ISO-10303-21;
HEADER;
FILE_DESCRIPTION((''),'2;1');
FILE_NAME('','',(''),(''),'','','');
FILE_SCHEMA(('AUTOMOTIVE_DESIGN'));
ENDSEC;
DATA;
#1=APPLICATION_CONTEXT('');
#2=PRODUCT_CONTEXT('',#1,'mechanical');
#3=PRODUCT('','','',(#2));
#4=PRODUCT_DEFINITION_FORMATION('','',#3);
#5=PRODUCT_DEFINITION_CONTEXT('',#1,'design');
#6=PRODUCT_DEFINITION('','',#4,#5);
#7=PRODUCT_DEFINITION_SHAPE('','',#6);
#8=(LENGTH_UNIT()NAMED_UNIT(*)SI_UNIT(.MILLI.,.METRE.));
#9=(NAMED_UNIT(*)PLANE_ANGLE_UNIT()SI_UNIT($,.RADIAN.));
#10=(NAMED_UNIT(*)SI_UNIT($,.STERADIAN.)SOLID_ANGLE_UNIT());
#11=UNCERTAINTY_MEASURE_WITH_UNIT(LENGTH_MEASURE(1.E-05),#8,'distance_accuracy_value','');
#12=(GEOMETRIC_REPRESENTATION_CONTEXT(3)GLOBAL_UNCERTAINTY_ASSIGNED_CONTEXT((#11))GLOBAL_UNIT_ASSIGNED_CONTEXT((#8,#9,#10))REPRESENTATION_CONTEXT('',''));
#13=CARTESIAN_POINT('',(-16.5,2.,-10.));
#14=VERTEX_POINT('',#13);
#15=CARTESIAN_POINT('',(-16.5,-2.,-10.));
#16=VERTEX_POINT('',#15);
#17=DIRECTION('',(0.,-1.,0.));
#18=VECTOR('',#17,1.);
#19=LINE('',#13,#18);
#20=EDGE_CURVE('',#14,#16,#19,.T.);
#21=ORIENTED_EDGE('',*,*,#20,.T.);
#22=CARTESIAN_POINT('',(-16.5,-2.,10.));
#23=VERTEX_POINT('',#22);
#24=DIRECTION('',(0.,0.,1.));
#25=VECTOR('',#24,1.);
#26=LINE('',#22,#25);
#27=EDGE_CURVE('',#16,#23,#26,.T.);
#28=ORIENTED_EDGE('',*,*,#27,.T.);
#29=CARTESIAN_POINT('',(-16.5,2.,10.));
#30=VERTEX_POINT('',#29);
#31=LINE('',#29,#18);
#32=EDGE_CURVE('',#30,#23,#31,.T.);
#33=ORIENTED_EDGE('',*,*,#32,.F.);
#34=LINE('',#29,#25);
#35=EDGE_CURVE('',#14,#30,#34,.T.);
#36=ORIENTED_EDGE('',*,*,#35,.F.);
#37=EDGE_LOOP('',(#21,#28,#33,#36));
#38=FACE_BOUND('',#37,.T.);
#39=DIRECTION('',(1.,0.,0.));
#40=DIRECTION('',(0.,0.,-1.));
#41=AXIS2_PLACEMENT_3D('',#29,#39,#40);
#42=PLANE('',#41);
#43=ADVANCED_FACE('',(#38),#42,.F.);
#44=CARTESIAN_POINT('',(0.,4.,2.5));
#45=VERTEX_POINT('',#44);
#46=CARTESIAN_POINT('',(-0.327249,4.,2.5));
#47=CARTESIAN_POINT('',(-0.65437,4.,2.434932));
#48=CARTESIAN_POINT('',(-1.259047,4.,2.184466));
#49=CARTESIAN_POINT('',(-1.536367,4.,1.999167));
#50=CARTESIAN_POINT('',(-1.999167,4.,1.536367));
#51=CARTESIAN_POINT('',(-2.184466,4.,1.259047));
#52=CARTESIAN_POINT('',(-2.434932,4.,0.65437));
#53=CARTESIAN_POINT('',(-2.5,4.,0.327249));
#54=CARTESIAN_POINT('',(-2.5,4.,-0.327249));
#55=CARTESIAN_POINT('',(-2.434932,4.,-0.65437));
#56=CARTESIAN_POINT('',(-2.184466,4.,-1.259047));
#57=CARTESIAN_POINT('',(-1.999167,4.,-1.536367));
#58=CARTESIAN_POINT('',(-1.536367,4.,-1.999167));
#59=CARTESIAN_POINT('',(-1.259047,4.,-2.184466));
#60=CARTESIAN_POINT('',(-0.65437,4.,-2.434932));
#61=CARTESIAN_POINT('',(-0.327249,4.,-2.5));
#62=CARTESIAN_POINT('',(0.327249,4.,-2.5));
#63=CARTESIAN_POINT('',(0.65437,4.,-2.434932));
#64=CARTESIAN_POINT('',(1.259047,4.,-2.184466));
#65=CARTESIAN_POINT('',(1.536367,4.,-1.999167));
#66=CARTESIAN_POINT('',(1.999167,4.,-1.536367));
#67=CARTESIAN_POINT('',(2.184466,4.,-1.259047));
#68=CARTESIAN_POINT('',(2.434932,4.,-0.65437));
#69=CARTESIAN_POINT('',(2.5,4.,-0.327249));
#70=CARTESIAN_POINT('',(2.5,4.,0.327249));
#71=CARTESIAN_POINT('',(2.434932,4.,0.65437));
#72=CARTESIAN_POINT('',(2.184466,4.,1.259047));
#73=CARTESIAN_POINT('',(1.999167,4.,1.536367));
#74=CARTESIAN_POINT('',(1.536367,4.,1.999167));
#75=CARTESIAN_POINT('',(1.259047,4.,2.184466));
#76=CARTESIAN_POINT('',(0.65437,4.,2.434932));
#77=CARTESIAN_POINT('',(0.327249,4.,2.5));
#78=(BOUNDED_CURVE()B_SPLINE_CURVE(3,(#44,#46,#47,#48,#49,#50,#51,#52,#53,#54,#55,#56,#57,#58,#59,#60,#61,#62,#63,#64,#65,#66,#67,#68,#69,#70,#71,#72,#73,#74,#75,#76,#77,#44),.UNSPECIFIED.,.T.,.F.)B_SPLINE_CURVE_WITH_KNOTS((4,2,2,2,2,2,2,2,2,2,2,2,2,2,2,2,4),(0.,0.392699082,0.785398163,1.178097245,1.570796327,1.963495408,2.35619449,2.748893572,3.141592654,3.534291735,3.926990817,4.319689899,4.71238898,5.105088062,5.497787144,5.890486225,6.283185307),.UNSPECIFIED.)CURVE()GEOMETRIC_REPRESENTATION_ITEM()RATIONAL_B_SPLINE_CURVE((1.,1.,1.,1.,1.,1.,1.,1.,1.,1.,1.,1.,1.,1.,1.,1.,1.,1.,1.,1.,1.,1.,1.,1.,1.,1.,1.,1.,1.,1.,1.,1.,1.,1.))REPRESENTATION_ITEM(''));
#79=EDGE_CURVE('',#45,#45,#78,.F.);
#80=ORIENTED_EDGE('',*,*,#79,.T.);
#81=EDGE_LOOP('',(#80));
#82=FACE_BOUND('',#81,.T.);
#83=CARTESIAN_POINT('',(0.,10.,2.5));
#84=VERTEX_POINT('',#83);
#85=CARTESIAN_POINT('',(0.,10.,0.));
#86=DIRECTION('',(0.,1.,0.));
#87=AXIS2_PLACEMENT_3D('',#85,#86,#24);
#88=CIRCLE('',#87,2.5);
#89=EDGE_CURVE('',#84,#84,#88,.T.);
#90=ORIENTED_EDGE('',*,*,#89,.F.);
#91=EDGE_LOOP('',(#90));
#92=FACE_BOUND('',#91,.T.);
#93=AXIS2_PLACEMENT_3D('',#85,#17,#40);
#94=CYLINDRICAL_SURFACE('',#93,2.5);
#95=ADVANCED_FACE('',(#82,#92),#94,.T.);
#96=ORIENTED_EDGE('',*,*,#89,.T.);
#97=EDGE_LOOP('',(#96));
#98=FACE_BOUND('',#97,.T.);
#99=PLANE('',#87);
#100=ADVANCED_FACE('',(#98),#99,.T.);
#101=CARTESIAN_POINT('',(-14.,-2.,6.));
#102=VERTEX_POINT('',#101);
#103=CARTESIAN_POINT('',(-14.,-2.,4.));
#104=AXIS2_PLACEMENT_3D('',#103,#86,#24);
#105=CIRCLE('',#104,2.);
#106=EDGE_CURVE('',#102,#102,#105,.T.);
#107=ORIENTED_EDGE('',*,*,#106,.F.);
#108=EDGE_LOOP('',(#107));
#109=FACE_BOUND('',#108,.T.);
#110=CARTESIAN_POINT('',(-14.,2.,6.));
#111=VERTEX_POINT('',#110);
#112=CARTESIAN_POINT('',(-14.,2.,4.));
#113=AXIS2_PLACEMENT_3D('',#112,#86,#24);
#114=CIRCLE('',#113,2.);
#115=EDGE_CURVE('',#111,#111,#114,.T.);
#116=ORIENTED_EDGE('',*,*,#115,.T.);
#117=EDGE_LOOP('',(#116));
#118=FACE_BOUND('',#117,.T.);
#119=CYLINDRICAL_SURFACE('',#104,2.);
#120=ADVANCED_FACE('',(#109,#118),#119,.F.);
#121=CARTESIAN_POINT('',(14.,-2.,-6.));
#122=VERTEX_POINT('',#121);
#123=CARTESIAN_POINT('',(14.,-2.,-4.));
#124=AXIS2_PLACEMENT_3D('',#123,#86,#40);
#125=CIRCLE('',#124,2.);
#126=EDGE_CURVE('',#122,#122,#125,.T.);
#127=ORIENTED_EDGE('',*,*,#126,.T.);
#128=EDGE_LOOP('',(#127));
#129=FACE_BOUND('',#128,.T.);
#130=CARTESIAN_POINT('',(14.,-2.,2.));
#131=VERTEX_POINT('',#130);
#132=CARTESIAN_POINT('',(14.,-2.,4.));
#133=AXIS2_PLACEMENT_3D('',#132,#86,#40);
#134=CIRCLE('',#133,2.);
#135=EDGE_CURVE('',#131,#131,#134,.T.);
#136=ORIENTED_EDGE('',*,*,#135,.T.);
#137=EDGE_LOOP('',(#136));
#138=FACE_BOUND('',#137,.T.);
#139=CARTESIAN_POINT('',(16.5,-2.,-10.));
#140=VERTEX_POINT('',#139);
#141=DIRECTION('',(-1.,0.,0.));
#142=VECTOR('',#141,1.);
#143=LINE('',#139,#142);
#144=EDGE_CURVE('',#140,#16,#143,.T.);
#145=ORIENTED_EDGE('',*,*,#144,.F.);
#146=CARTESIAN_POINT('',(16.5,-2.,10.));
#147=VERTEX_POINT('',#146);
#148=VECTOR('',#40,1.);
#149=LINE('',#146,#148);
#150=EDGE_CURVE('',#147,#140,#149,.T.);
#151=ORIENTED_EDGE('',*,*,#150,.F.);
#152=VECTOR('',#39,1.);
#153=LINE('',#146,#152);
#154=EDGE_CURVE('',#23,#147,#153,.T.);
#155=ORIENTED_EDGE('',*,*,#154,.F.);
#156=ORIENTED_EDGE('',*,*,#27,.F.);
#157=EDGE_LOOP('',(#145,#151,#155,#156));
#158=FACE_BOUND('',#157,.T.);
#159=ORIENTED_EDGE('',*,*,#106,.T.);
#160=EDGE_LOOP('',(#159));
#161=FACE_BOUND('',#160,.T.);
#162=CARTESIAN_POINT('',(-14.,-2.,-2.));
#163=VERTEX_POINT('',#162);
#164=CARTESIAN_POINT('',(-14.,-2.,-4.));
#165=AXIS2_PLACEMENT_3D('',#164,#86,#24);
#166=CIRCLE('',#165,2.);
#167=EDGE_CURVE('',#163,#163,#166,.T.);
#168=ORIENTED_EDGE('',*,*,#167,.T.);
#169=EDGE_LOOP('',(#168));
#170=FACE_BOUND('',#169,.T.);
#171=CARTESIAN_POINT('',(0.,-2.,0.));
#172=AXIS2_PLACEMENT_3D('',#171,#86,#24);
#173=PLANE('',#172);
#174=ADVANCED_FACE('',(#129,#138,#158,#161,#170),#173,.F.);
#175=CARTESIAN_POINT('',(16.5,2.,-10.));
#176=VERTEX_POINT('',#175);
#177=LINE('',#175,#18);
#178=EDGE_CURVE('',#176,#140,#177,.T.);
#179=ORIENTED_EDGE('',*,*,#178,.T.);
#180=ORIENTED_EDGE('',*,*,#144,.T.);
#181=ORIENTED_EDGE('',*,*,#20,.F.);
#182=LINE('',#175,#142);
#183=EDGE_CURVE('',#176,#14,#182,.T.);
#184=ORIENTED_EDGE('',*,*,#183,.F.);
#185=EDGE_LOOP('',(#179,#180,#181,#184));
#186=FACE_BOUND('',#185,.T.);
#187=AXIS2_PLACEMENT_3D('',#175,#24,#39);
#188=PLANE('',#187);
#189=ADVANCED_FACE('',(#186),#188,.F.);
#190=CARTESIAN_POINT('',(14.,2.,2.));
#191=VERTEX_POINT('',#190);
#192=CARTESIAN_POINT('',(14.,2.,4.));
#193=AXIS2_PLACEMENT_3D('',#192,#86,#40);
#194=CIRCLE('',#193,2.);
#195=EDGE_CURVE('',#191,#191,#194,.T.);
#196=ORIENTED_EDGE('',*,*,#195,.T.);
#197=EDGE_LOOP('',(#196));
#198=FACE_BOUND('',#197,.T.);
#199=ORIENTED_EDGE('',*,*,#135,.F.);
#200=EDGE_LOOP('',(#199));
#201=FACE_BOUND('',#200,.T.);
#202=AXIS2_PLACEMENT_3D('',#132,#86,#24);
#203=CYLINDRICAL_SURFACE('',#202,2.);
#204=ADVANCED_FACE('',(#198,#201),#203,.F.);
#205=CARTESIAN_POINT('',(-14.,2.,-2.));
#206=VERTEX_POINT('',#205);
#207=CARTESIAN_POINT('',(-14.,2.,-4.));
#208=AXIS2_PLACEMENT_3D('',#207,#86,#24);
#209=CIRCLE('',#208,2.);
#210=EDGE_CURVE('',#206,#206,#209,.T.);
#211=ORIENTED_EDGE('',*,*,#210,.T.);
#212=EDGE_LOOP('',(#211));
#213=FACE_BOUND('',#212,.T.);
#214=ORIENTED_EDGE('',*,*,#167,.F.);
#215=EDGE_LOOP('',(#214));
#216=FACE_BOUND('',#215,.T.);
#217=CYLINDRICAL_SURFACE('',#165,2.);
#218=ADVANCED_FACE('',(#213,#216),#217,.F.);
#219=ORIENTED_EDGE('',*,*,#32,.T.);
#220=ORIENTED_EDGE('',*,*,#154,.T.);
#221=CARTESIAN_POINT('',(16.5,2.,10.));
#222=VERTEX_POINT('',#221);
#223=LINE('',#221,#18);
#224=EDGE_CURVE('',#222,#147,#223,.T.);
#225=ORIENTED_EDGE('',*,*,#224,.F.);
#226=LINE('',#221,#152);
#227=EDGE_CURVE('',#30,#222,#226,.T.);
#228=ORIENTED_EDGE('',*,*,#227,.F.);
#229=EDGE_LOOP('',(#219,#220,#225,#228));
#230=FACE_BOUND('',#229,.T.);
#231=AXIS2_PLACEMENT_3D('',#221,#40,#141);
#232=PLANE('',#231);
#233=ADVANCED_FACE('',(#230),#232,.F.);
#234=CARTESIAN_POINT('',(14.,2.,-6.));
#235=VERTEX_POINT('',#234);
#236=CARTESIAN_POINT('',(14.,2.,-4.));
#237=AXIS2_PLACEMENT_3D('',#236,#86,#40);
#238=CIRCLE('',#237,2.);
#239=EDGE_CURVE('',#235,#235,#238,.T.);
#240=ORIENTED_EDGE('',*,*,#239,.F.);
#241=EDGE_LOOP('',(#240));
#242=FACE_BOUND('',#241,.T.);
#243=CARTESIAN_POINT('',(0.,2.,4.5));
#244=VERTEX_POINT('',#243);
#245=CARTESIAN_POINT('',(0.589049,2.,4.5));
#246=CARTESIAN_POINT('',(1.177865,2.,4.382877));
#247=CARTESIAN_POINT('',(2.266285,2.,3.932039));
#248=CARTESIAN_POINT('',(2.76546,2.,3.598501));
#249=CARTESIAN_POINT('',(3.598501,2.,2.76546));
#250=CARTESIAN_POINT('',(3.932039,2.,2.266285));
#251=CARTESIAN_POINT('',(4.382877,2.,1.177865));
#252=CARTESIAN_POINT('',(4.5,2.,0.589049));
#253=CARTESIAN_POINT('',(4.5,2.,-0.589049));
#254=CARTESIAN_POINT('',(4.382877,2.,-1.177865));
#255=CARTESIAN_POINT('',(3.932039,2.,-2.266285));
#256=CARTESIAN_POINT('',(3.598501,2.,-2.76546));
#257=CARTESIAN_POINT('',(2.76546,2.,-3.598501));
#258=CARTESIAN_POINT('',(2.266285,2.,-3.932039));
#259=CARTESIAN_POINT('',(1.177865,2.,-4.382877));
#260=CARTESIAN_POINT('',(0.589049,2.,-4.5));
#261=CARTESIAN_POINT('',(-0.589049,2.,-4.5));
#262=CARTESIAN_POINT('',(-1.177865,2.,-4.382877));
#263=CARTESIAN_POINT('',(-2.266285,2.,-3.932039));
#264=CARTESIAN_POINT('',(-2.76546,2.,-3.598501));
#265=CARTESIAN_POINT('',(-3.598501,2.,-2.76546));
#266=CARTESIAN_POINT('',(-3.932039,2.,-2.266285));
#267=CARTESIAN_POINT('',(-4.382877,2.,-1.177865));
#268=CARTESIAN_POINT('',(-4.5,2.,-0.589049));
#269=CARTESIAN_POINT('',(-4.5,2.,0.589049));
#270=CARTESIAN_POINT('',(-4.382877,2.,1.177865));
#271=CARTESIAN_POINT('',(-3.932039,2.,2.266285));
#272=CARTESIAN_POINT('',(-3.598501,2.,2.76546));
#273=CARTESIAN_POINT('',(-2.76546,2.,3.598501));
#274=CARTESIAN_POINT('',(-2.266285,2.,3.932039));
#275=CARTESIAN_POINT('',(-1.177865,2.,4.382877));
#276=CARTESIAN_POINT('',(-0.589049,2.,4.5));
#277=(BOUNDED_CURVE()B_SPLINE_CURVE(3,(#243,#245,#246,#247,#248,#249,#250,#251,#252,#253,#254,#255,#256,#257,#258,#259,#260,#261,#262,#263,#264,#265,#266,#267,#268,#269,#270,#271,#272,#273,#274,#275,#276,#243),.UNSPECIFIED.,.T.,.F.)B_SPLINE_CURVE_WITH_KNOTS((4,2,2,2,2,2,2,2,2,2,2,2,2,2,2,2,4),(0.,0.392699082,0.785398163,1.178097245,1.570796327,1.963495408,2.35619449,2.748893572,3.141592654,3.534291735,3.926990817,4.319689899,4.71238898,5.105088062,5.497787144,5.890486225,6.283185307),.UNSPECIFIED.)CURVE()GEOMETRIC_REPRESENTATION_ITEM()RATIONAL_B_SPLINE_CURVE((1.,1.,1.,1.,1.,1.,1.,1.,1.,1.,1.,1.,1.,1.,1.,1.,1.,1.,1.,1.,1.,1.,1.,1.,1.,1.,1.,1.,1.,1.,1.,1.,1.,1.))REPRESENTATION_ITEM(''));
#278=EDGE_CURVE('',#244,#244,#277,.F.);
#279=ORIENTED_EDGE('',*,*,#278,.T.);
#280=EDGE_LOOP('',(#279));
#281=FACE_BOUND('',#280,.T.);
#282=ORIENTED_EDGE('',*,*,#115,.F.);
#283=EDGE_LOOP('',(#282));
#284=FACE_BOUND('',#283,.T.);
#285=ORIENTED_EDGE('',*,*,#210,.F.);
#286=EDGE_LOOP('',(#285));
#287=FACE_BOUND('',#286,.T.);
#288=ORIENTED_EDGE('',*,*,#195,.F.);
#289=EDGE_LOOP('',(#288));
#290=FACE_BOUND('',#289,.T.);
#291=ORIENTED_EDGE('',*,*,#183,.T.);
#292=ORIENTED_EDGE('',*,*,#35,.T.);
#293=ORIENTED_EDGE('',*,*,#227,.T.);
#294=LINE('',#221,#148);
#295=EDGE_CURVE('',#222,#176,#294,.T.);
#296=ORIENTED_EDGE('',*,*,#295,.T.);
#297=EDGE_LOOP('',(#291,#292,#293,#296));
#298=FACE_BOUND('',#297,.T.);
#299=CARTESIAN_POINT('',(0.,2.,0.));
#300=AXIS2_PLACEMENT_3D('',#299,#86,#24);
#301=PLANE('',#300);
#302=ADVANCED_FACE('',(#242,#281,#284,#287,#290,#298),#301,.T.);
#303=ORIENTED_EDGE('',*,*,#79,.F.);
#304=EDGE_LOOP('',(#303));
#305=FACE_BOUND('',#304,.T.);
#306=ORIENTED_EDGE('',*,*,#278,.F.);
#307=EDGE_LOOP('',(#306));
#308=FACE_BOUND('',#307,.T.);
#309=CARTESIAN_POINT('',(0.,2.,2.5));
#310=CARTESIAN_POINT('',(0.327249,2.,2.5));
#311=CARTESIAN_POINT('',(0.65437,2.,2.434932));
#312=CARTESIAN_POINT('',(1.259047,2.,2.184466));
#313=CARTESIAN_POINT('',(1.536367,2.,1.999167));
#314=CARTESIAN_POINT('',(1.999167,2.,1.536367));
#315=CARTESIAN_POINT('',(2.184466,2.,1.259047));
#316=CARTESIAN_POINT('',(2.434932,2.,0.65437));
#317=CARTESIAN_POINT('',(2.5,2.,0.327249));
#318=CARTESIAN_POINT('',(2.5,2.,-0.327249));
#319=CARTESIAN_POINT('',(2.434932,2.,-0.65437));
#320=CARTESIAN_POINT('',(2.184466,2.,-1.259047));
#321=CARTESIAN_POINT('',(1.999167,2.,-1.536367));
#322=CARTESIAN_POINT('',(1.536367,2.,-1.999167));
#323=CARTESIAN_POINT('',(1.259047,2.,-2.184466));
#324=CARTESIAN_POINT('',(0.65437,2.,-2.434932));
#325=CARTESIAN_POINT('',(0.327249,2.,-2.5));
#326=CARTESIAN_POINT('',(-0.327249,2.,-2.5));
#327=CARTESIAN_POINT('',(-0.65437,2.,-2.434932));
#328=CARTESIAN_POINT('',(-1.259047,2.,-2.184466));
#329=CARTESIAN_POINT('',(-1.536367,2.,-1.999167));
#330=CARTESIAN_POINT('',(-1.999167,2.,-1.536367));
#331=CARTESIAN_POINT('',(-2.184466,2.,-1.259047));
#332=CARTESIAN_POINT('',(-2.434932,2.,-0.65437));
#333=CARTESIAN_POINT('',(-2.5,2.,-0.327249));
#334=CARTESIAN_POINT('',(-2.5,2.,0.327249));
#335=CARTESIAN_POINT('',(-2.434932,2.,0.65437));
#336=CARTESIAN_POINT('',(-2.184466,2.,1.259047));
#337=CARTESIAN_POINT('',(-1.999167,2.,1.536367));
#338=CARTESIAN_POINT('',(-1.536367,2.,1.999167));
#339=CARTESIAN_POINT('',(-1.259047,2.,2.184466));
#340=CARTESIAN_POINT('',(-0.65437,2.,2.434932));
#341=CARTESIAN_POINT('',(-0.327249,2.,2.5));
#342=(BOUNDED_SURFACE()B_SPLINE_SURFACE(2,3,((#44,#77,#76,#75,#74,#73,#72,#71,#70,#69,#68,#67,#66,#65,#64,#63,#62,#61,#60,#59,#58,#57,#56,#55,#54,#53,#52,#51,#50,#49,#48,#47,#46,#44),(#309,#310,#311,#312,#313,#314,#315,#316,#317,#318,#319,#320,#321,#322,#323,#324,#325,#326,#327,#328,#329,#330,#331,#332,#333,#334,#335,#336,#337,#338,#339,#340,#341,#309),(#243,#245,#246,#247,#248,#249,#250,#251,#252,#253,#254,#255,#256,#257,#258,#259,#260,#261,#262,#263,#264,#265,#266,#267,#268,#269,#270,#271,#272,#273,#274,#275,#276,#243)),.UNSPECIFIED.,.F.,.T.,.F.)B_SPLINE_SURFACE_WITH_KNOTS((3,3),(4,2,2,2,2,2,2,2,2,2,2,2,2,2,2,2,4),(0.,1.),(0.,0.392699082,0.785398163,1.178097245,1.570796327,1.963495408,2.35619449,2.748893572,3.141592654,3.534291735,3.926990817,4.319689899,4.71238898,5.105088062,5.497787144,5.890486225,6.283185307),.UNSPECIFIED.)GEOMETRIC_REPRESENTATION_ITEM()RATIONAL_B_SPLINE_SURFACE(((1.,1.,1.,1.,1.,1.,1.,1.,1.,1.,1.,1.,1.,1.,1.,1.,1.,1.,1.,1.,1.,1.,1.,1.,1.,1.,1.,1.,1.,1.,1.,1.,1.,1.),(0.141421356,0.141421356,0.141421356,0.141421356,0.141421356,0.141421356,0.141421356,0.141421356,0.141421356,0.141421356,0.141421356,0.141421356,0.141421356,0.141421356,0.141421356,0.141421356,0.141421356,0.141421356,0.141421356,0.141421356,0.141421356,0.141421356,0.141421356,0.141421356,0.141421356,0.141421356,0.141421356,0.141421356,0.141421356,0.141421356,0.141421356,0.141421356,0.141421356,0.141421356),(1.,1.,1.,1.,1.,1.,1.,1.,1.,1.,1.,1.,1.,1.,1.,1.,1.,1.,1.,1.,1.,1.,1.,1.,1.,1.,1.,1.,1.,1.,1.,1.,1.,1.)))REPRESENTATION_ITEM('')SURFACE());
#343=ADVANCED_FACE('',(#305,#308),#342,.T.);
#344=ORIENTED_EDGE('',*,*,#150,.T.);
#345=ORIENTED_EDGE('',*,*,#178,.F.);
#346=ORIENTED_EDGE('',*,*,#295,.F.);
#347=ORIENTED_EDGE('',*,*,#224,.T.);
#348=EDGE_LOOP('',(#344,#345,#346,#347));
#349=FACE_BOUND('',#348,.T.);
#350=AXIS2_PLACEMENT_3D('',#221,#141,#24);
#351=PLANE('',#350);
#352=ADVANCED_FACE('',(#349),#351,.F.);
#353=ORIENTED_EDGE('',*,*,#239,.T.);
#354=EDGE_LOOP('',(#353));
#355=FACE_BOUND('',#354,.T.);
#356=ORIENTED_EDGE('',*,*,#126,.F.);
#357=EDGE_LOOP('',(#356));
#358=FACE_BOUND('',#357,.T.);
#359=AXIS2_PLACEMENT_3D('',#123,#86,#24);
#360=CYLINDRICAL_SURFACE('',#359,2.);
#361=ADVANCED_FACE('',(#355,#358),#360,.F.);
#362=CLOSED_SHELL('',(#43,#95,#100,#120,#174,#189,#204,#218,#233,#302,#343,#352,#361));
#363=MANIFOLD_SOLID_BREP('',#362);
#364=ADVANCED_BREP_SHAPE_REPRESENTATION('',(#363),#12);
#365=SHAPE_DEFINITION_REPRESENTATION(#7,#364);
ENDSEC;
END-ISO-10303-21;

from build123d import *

# Parameters (mm, degrees)
SKETCH1_W           = 33
SKETCH1_H           = 20
BOSS_EXTRUDE1_DEPTH = 2
SKETCH2_R           = 2
CUT_EXTRUDE1_DEPTH  = 20.704060495
SKETCH3_R           = 2.5
BOSS_EXTRUDE2_DEPTH = 8
FILLET1_SIZE        = 2


with BuildPart() as part:
    # Sketch1 → Boss-Extrude1 (new, symmetric)
    with BuildSketch(Plane(origin=(0, 0, 0), x_dir=(1, 0, 0), z_dir=(0, 1, 0))):
        Rectangle(SKETCH1_W, SKETCH1_H)
    extrude(amount=BOSS_EXTRUDE1_DEPTH, both=True)

    # Sketch2 → Cut-Extrude1 (cut, through all)
    with BuildSketch(Plane(origin=(0, 2, 0), x_dir=(1, 0, 0), z_dir=(0, 1, 0))):
        with Locations(Location((-14, 4, 0), (0, 0, 270))):
            Circle(SKETCH2_R)
        with Locations(Location((-14, -4, 0), (0, 0, 270))):
            Circle(SKETCH2_R)
        with Locations(Location((14, -4, 0), (0, 0, 90))):
            Circle(SKETCH2_R)
        with Locations(Location((14, 4, 0), (0, 0, 90))):
            Circle(SKETCH2_R)
    extrude(amount=-CUT_EXTRUDE1_DEPTH, mode=Mode.SUBTRACT)

    # Sketch3 → Boss-Extrude2 (add)
    with BuildSketch(Plane(origin=(0, 2, 0), x_dir=(1, 0, 0), z_dir=(0, 1, 0))):
        with Locations(Location((0, 0, 0), (0, 0, 270))):
            Circle(SKETCH3_R)
    extrude(amount=BOSS_EXTRUDE2_DEPTH)

    # Fillet1
    # a fillet whose section is not a circle: 2 mm, written as the material it adds along each edge
    with BuildSketch(Plane(origin=(0, 2, 0), x_dir=(0, 0, 1), z_dir=(-1, 0, 0))) as fillet1_piece_1:
        with BuildLine():
            Bezier((2.5 + FILLET1_SIZE, 0), (2.5, 0), (2.5, FILLET1_SIZE), weights=[1, 0.141421356, 1])
            Line((2.5, FILLET1_SIZE), (2.5, 0))
            Line((2.5, 0), (2.5 + FILLET1_SIZE, 0))
        make_face()
    revolve(axis=Axis((0, 2, 0), (0, 1, 0)))


solid = part.part
